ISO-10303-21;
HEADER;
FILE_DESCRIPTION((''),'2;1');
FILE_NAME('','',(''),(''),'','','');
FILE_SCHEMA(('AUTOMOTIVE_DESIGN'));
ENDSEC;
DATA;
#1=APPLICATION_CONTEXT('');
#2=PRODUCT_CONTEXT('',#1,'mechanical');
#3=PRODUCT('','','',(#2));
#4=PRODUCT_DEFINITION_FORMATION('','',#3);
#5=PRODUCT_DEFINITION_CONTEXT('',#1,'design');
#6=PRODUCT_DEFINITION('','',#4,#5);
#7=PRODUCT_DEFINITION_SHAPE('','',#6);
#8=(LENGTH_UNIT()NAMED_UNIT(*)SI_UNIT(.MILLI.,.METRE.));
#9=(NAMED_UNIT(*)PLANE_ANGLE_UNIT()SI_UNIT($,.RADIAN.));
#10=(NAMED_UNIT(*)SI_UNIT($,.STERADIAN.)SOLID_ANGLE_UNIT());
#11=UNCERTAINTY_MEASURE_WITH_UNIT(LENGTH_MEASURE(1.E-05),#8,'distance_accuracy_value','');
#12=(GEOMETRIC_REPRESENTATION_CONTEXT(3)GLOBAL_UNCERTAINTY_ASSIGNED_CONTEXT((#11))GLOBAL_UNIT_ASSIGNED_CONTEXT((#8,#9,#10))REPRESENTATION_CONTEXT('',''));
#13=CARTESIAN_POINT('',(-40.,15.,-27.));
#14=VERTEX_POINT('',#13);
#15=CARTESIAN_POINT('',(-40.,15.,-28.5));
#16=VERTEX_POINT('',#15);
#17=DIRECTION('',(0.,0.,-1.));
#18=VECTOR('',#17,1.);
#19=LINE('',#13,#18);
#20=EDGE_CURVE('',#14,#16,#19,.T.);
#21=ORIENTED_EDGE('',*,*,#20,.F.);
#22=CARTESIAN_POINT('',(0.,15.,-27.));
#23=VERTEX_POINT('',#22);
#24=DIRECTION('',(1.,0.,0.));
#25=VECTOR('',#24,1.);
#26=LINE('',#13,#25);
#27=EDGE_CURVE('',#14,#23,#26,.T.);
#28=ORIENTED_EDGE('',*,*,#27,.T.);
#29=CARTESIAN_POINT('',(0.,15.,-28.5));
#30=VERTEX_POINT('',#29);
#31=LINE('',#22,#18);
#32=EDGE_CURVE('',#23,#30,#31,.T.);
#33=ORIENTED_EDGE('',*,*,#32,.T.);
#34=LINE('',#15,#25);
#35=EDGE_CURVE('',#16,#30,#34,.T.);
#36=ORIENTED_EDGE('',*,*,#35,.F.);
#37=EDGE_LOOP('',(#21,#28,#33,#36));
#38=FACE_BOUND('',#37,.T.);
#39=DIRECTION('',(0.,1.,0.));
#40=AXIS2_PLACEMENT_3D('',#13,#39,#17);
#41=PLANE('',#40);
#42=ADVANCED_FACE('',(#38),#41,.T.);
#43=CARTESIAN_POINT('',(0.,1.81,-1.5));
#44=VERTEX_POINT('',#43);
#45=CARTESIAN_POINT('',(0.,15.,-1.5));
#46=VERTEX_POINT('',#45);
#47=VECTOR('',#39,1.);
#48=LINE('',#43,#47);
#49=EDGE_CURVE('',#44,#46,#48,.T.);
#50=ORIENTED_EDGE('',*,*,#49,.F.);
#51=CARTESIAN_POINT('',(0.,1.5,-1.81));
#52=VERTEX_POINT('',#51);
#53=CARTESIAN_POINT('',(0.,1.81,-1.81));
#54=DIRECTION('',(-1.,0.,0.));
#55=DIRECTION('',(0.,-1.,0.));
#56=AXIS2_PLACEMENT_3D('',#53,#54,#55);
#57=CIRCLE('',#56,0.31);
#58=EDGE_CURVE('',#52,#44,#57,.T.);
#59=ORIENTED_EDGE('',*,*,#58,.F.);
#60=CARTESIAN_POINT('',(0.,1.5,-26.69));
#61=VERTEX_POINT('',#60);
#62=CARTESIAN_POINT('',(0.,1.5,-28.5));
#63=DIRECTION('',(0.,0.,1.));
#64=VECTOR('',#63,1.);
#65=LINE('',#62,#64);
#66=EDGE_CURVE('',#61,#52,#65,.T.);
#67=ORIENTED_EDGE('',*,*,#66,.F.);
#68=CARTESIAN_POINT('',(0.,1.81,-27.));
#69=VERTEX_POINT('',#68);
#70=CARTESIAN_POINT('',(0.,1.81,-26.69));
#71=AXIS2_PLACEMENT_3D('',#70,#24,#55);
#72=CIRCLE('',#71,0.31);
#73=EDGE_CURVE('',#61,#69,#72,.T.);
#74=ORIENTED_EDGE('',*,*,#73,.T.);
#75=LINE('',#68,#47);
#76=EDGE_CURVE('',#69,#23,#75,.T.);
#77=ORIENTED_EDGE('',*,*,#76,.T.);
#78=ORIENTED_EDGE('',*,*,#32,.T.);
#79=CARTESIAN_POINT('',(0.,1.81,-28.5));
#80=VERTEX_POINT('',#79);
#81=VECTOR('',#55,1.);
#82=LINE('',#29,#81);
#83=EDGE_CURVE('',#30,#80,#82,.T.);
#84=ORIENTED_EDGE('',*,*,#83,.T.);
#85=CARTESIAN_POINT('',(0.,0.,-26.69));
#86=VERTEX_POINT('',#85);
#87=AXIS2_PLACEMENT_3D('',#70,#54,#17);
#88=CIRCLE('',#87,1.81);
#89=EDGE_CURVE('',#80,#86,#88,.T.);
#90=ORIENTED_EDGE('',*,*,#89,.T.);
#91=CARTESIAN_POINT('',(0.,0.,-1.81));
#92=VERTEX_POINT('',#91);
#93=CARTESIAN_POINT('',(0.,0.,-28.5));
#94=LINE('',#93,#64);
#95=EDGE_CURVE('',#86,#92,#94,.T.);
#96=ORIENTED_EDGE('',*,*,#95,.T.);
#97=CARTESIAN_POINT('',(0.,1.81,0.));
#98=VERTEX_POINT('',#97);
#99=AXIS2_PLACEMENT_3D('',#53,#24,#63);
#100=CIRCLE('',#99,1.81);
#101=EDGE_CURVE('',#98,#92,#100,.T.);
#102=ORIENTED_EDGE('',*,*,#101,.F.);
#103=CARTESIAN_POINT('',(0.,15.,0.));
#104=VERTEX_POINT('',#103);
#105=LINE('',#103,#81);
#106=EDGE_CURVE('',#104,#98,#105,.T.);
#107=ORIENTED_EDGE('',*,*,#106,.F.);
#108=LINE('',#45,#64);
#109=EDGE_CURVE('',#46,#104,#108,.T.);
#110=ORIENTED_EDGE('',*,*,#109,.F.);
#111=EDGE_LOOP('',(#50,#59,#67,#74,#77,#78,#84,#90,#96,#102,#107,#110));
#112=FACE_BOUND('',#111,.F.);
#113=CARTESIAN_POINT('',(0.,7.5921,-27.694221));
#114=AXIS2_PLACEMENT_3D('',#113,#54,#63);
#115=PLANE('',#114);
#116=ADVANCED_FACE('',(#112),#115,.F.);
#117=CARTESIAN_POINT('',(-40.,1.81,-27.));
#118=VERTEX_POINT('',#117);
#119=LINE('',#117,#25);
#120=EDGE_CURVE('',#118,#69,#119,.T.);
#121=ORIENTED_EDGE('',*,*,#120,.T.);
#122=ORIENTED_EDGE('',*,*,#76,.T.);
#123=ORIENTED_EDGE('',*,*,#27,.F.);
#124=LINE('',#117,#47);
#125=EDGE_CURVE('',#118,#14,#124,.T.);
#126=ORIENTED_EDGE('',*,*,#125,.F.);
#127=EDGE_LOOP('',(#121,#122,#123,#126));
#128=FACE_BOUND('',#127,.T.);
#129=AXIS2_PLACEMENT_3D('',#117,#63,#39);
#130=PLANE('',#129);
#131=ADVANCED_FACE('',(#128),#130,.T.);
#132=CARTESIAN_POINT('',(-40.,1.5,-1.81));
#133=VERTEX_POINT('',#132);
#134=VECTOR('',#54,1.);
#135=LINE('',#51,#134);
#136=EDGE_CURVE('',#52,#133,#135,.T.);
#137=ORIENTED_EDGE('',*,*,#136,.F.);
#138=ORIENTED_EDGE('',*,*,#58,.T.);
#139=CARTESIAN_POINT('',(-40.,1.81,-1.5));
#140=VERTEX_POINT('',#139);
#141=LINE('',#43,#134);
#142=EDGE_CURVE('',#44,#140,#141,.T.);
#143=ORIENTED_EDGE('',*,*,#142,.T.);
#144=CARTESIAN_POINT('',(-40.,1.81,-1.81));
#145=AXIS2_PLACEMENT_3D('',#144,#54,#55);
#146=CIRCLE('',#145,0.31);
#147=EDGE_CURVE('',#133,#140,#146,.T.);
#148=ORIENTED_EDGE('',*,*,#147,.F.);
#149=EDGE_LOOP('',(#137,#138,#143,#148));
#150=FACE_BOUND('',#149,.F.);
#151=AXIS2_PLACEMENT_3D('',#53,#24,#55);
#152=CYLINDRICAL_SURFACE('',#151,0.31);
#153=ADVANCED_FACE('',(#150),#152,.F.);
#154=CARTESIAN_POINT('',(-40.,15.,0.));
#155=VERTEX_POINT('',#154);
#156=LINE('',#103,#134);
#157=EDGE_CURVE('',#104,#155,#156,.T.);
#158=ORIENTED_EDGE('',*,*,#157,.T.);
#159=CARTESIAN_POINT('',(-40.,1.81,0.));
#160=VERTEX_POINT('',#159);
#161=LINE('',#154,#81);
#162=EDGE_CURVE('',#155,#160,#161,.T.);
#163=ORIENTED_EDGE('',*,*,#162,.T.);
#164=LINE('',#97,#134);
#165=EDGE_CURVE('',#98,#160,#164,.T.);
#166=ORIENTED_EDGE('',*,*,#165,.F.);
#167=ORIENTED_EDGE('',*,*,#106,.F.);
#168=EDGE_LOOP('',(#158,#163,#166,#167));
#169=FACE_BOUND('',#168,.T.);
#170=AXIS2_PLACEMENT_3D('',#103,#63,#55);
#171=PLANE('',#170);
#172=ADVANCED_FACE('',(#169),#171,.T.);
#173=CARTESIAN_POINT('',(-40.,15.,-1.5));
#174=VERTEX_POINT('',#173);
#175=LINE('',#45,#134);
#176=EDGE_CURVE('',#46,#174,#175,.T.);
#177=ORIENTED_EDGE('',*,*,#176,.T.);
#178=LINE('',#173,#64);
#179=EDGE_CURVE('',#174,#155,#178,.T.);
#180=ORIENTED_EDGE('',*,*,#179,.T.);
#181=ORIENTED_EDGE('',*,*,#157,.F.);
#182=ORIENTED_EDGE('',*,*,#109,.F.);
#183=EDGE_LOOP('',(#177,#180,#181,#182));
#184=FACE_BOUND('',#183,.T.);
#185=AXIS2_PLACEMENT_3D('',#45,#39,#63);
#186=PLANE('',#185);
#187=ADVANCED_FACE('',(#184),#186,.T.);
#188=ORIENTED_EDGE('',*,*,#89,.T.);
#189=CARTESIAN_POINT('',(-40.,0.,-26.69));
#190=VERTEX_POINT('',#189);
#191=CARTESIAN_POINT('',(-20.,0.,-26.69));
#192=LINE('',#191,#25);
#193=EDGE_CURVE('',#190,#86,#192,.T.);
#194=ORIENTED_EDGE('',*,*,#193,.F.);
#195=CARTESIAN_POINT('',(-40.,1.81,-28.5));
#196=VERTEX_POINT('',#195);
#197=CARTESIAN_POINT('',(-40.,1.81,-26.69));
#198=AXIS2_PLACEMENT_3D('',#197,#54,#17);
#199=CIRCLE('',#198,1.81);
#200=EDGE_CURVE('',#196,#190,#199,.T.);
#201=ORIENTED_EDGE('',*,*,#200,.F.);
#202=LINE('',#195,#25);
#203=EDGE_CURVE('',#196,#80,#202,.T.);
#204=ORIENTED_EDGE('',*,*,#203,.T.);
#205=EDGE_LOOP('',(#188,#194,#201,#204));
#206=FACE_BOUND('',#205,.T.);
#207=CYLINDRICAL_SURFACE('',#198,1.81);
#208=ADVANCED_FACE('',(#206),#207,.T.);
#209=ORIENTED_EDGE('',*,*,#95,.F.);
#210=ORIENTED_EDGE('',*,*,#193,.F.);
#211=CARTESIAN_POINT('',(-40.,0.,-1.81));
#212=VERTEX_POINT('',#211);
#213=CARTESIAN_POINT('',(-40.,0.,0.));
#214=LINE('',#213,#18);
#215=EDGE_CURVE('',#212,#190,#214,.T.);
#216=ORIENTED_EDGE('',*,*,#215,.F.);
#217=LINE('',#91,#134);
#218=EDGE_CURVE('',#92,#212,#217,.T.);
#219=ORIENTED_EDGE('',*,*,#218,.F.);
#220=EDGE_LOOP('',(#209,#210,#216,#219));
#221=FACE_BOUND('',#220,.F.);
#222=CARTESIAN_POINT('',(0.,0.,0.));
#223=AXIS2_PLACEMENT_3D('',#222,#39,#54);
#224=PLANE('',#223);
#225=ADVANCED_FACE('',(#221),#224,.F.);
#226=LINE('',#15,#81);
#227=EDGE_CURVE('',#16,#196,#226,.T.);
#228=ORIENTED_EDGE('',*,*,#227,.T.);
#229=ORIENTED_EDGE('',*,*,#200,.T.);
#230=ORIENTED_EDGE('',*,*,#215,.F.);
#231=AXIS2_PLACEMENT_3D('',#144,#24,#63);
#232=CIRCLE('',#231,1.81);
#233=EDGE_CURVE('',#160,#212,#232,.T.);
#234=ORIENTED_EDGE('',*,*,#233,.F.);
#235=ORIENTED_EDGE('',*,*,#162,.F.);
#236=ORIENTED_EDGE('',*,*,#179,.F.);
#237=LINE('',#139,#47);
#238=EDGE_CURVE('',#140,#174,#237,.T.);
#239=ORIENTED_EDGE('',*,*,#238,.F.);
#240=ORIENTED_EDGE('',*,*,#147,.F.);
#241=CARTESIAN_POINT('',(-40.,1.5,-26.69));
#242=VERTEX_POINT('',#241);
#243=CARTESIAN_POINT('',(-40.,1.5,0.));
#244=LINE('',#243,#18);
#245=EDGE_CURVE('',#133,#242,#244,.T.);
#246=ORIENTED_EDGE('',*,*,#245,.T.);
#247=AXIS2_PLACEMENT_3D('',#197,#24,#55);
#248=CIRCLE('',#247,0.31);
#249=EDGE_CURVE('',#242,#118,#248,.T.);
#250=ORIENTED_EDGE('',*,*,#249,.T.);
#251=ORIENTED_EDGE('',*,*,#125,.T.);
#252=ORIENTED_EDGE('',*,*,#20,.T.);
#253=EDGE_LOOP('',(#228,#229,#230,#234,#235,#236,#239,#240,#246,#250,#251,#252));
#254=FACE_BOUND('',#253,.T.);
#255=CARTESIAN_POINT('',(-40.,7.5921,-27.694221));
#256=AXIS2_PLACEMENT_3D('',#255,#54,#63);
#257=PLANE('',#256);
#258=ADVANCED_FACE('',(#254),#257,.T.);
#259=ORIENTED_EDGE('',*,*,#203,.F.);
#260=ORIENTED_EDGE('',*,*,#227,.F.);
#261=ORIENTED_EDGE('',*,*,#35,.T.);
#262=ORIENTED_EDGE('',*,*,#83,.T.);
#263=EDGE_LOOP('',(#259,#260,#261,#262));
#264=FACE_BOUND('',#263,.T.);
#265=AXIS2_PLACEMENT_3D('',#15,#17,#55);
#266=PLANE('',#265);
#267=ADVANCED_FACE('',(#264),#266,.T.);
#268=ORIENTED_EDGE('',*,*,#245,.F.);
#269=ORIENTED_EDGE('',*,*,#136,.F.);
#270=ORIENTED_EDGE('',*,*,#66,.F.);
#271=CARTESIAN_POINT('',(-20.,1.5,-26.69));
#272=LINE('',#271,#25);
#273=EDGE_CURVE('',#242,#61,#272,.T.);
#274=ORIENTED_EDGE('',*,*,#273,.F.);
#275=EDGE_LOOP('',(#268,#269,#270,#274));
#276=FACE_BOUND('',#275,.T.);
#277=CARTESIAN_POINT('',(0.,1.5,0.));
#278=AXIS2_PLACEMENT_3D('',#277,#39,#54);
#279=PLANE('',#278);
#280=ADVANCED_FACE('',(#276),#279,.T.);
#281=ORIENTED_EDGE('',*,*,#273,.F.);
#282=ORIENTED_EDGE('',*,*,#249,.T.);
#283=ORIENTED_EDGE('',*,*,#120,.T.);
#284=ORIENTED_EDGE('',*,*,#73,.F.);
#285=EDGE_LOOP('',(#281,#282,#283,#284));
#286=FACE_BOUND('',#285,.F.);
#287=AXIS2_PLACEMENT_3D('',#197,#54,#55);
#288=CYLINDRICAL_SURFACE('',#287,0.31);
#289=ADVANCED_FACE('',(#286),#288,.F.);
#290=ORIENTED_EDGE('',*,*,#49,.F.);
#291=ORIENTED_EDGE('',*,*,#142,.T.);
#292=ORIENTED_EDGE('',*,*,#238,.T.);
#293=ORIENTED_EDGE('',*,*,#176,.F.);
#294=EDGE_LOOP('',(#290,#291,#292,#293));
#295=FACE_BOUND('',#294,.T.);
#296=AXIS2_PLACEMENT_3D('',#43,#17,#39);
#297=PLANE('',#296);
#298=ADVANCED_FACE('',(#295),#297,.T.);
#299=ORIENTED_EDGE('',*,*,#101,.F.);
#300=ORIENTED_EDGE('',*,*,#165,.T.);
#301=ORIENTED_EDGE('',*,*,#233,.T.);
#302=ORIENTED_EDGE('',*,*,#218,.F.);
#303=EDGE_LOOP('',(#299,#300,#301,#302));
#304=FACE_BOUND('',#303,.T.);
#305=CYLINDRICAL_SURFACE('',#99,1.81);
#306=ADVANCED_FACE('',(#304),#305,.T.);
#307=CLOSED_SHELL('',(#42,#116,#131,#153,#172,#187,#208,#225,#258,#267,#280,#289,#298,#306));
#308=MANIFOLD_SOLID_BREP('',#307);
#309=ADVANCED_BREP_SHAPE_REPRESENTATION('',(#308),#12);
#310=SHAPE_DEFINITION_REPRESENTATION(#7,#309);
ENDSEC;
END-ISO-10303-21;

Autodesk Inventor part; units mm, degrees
ref_plane "YZ Plane" through (0, 0, 0) normal (1, 0, 0) x (0, 1, 0)
ref_plane "XZ Plane" through (0, 0, 0) normal (0, 1, 0) x (-1, 0, 0)
ref_plane "XY Plane" through (0, 0, 0) normal (0, 0, 1) x (1, 0, 0)
sketch "Sketch1" plane through (0, 0, 0) normal (0, 1, 0) x (-1, 0, 0)
  line L0 (0, 0) -> (40, 0)
  line L1 (40, 0) -> (40, -28.5)
  line L2 (40, -28.5) -> (0, -28.5)
  line L3 (0, -28.5) -> (0, 0)
  dimension "d0" = 40
  dimension "d1" = 28.5
extrude "Plate1" add sketch "Sketch1" along normal blind 1.5
sketch "Sketch2" plane through (0, 0, -1.5) normal (0, 0, 1) x (1, 0, 0)
  line L0 (-40, 0) -> (0, 0)
  line L1 (0, 0) -> (0, 15)
  line L2 (0, 15) -> (-40, 15)
  line L3 (-40, 15) -> (-40, 0)
edge flange "Flange1" height 15 angle 90 thickness 1.5 bend radius 0.31 thickness toward (0, 0, 1) relief tear relief width 1.5 relief depth 0.75 edges at (-20, 1.5, 0) wall of the first edge with corners at (-40, 0, -1.5) (0, 0, -1.5) (0, 15, -1.5) (-40, 15, -1.5)
bend "Bend1"
corner "Corner1"
sketch "Sketch3" plane through (-40, 0, -27) normal (0, 0, -1) x (-1, 0, 0)
  line L0 (-40, 0) -> (0, 0)
  line L1 (0, 0) -> (0, 15)
  line L2 (0, 15) -> (-40, 15)
  line L3 (-40, 15) -> (-40, 0)
edge flange "Flange2" height 15 angle 90 thickness 1.5 bend radius 0.31 thickness toward (0, 0, -1) relief tear relief width 1.5 relief depth 0.75 edges at (-20, 1.5, -28.5) wall of the first edge with corners at (0, 0, -27) (-40, 0, -27) (-40, 15, -27) (0, 15, -27)
bend "Bend2"
corner "Corner2"
equation "\"d2\" = Thickness"
equation "\"d3\" = BendReliefWidth"
equation "\"d4\" = BendReliefDepth"
equation "\"d5\" = MinimumRemnant"
equation "\"d6\" = TransitionRadius"
equation "\"d9\" = BendRadius"
equation "\"d10\" = CornerReliefSize"
equation "\"d11\" = GapSize"
equation "\"d12\" = JacobiRadiusSize"
equation "\"d13\" = BendReliefWidth"
equation "\"d14\" = BendReliefDepth"
equation "\"d15\" = MinimumRemnant"
equation "\"d16\" = TransitionRadius"
equation "\"d19\" = BendRadius"
equation "\"d20\" = CornerReliefSize"
equation "\"d21\" = GapSize"
equation "\"d22\" = JacobiRadiusSize"
equation "\"BendReliefWidth\" = Thickness"
equation "\"BendReliefDepth\" = 0.5 * Thickness"
equation "\"CornerReliefSize\" = 4 * Thickness"
equation "\"MinimumRemnant\" = 2 * Thickness"
equation "\"TransitionRadius\" = BendRadius"
equation "\"JacobiRadiusSize\" = BendRadius"
equation "\"GapSize\" = Thickness"
equation "\"Thickness\" = 1.5"
equation "\"BendRadius\" = 0.31"
properties part number "body_motor_frame" material "Aluminum 6061-AHC"
